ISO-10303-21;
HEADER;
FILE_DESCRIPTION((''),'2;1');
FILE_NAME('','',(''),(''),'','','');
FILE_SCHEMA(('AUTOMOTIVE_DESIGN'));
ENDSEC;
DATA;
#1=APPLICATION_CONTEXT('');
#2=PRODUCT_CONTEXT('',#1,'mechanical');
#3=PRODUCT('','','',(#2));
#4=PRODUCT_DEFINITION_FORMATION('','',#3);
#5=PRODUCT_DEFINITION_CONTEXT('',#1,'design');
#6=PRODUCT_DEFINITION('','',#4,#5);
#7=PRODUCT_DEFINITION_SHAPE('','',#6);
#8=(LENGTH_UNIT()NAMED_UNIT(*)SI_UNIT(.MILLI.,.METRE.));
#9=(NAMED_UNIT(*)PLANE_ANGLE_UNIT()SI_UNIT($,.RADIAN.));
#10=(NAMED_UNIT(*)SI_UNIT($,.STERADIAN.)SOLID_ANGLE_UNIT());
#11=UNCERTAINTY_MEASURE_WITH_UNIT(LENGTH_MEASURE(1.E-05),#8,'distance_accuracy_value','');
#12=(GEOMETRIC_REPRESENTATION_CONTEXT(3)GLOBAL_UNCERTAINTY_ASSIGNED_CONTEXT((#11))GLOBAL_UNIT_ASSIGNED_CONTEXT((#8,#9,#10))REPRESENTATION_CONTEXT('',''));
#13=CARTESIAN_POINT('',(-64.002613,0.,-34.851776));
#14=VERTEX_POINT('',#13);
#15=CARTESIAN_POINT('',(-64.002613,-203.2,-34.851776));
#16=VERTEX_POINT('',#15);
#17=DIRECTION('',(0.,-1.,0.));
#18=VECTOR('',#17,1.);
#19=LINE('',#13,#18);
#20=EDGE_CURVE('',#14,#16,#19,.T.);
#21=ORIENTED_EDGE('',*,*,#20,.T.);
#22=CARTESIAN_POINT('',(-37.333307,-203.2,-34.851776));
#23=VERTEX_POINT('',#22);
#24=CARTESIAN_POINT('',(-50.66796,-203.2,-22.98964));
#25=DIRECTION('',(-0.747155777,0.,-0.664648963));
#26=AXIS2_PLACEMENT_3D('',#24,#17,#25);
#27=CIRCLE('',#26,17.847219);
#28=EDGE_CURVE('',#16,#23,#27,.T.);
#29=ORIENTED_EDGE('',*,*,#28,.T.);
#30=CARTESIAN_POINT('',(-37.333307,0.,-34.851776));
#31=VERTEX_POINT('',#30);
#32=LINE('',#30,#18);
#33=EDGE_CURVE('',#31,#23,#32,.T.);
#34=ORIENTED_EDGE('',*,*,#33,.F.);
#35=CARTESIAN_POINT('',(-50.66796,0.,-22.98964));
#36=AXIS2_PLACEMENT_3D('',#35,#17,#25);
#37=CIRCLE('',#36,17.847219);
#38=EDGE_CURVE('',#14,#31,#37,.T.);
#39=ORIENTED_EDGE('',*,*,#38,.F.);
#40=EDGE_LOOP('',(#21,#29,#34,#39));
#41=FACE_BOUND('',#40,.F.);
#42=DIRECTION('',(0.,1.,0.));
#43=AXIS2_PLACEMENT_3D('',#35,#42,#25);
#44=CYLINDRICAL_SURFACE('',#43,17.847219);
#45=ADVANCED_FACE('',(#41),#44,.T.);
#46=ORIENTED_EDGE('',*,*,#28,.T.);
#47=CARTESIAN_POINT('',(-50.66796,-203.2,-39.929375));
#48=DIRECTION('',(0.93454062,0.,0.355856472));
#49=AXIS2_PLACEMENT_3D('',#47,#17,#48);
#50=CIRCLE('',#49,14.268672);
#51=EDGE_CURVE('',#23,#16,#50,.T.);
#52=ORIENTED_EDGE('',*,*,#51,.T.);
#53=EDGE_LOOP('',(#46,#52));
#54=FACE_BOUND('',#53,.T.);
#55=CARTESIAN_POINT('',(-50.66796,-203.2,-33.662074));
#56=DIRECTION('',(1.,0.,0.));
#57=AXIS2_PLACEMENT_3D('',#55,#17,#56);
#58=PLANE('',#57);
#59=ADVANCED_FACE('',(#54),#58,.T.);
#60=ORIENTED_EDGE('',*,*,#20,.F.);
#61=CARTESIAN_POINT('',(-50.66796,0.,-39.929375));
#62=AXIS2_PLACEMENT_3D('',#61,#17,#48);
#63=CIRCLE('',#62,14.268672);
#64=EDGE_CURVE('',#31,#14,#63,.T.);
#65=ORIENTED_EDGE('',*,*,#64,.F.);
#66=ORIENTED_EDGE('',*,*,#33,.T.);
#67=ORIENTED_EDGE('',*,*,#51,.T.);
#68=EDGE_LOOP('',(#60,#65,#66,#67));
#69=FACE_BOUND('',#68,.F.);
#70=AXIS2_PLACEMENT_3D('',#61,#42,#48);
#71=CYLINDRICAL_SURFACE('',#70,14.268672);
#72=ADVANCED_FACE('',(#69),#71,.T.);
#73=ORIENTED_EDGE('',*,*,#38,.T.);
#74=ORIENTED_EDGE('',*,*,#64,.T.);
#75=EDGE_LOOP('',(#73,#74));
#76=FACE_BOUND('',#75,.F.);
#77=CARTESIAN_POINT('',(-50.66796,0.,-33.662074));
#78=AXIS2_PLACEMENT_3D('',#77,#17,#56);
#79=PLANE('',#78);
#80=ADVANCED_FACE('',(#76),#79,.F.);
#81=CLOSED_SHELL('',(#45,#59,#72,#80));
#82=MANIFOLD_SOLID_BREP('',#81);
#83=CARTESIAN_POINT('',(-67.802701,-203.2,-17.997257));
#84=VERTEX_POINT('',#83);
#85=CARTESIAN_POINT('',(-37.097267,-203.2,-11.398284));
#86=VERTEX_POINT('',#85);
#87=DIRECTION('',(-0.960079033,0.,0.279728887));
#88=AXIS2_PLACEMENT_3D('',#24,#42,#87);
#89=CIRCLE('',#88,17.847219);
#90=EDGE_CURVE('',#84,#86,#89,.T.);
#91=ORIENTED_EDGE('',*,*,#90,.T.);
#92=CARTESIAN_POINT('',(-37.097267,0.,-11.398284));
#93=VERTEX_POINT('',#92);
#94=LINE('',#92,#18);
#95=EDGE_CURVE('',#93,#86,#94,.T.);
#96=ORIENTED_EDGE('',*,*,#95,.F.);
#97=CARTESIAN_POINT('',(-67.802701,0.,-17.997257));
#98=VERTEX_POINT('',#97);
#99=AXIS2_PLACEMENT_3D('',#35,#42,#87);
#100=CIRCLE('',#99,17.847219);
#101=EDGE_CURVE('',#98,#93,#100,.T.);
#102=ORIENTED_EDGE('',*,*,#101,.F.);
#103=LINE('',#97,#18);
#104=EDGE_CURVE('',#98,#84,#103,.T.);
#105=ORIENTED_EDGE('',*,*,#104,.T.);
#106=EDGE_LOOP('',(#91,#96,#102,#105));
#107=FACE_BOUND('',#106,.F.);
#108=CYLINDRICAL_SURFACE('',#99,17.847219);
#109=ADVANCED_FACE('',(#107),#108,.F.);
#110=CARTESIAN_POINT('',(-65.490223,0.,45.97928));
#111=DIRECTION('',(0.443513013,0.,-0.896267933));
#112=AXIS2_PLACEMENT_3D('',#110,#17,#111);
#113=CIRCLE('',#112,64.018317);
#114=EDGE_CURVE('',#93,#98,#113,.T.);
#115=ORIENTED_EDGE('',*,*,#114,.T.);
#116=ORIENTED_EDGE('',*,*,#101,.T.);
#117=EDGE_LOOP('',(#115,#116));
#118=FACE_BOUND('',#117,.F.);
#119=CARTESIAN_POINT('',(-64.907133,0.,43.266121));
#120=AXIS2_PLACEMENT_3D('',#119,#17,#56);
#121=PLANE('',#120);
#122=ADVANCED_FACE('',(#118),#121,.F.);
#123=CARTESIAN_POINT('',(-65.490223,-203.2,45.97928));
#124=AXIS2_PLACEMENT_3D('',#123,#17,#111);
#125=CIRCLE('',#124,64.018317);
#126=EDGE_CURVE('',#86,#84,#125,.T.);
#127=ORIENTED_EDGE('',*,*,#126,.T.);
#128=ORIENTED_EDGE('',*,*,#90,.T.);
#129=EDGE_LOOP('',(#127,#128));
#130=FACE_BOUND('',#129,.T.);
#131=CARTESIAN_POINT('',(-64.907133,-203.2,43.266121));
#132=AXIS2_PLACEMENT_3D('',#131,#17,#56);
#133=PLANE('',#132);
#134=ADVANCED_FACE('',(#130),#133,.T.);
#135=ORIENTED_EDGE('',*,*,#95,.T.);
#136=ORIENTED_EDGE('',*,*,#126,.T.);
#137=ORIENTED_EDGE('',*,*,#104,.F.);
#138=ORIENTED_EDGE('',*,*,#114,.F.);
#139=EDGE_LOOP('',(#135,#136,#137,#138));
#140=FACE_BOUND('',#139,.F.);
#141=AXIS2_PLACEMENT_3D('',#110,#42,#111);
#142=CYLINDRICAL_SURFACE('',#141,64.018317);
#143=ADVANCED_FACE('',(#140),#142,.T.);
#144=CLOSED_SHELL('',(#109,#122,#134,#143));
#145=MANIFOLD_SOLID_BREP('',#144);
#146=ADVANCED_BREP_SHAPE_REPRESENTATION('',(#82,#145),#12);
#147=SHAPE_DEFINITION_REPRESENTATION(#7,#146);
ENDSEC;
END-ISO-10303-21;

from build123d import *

# Parameters (mm, degrees)
F1_DEPTH = 203.2


# Not quite as in the source:
# - a feature names something its author has since deleted; it is built from what else it names


with BuildPart() as f1:
    # F0 (on Front) → F1 (new body)
    with BuildSketch(Plane.XZ):
        with BuildLine():
            ThreePointArc((-67.802701422, -17.997257176), (-54.417922901, -5.5408285068), (-37.0972669354, -11.3982842828))
            ThreePointArc((-37.0972669354, -11.3982842828), (-78.9414112036, 108.5684996634), (-67.802701422, -17.997257176))
        make_face()
    extrude(amount=F1_DEPTH)


with BuildPart() as f1b:
    # F0 (on Front) → F1, piece 2 (new body)
    with BuildSketch(Plane.XZ):
        with BuildLine():
            ThreePointArc((-37.333307052, -34.8517759394), (-50.6679601967, -25.6607035221), (-64.0026133414, -34.8517759394))
            ThreePointArc((-64.0026133414, -34.8517759394), (-50.6679601967, -40.8368594944), (-37.333307052, -34.8517759394))
        make_face()
    extrude(amount=F1_DEPTH)


solid = Compound([f1.part, f1b.part])
